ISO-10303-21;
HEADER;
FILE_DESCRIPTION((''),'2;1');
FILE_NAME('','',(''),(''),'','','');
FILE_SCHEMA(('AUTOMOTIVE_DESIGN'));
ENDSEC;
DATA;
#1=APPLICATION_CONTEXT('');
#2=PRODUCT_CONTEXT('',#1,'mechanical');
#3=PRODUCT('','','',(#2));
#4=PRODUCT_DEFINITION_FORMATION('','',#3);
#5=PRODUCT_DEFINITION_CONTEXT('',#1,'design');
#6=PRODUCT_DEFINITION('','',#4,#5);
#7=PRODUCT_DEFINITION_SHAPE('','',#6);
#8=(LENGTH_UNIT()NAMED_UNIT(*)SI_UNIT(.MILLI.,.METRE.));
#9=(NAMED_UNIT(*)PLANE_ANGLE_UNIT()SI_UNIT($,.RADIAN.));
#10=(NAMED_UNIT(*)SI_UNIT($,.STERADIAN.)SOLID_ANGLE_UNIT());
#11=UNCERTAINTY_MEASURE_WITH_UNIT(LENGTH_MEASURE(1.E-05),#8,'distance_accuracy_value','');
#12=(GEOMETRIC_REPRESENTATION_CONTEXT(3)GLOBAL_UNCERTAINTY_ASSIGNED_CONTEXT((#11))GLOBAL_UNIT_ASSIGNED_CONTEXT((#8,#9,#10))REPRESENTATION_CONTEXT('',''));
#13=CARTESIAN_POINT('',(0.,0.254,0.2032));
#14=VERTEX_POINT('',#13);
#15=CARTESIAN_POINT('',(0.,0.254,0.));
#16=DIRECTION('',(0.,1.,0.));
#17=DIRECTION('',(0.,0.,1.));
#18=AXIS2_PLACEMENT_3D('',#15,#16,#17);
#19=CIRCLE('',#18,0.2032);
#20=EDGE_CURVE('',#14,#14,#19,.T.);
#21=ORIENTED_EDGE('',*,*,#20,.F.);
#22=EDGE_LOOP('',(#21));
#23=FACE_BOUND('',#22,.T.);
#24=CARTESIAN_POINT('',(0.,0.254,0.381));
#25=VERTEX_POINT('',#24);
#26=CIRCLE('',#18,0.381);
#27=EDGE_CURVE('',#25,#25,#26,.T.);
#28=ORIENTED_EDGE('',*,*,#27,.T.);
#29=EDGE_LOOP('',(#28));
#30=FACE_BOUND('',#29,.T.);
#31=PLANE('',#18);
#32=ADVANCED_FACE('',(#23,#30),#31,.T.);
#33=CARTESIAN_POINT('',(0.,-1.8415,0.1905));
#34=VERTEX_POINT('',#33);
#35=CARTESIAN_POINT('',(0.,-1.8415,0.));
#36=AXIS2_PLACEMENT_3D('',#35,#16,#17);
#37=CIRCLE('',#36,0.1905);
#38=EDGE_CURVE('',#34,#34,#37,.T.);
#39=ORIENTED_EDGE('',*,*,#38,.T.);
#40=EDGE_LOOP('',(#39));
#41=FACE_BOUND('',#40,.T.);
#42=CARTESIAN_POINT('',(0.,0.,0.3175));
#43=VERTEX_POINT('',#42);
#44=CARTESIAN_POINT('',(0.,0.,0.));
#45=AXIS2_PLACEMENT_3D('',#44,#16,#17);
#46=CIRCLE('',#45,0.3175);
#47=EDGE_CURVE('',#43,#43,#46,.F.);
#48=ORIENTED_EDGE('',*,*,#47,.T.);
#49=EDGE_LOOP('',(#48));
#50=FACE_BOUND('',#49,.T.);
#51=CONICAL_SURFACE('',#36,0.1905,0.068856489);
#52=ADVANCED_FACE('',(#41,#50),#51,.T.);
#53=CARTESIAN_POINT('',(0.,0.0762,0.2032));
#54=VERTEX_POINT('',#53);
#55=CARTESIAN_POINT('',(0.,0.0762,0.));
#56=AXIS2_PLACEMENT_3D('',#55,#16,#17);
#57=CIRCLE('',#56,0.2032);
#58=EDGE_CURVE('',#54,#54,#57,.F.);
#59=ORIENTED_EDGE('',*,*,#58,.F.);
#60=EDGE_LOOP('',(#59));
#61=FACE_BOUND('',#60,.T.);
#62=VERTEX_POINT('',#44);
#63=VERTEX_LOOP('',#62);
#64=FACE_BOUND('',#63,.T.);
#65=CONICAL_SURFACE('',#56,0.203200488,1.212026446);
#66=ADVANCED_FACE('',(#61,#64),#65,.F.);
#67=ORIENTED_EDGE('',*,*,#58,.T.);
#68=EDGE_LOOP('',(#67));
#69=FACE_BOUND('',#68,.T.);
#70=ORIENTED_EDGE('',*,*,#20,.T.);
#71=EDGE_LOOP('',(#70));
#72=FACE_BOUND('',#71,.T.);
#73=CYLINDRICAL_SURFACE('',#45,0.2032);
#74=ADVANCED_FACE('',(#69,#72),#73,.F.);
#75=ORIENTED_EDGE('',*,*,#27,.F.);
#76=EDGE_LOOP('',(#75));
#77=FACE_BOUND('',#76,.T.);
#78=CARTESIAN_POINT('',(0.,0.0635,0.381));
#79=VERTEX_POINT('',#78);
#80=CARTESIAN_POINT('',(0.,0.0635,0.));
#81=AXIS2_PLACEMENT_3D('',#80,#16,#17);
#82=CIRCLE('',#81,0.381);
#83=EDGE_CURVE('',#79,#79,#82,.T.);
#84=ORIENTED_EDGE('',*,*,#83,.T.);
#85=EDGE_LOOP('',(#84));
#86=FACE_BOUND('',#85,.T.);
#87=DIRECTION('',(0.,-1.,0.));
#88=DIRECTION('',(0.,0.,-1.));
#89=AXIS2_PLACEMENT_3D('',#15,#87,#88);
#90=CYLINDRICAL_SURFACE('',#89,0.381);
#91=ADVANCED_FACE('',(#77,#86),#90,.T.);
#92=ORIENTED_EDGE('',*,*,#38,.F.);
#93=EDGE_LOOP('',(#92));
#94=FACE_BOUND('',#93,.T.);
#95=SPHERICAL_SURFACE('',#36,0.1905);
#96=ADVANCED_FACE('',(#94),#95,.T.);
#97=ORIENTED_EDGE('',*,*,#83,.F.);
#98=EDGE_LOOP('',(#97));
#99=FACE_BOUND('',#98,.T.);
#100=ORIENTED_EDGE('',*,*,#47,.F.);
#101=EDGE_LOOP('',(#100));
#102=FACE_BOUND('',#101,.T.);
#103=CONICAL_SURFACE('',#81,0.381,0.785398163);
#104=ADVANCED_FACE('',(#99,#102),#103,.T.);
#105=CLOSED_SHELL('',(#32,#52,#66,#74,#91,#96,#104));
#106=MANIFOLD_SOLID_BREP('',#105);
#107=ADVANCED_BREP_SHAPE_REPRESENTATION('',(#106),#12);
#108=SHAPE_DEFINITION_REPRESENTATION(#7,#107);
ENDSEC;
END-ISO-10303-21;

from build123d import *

# Parameters (mm, degrees)
SKETCH1_R           = 0.381
BOSS_EXTRUDE1_DEPTH = 0.254
CHAMFER1_SIZE       = 0.0635
SKETCH5_R           = 0.2032
CUT_EXTRUDE1_DEPTH  = 0.254
CHAMFER2_SIZE       = 0.0762


with BuildPart() as part:
    # Sketch1 → Boss-Extrude1 (new body)
    with BuildSketch(Plane(origin=(0, 0, 0), x_dir=(1, 0, 0), z_dir=(0, 1, 0))):
        with Locations(Location((0, 0, 0), (0, 0, 270))):
            Circle(SKETCH1_R)
    extrude(amount=BOSS_EXTRUDE1_DEPTH)

    # Chamfer1
    chamfer1_edges = [part.edges().sort_by_distance(p)[0] for p in [
        (0, 0, -0.381),
    ]]
    chamfer(chamfer1_edges, length=CHAMFER1_SIZE)

    # Sketch4 → Revolve1 (revolve)
    with BuildSketch(Plane.ZY):
        with BuildLine():
            Line((0, 0), (0, -2.032))
            ThreePointArc((0, -2.032), (0.134703842, -1.976203842), (0.1905, -1.8415))
            Line((0.1905, -1.8415), (0.3175, 0))
            Line((0.3175, 0), (0, 0))
        make_face()
    revolve(axis=Axis((0, 0.254, 0), (0, -1, 0)))

    # Sketch5 → Cut-Extrude1 (cut)
    with BuildSketch(Plane(origin=(0, 0.254, 0), x_dir=(1, 0, 0), z_dir=(0, 1, 0))):
        with Locations(Location((0, 0, 0), (0, 0, 270))):
            Circle(SKETCH5_R)
    extrude(amount=-CUT_EXTRUDE1_DEPTH, mode=Mode.SUBTRACT)

    # Chamfer2
    # the kernel refuses this chamfer: 0.203200488, 0.0762 mm, written as the material it adds along each edge
    with BuildSketch(Plane(origin=(0, 0, 0), x_dir=(0, 0, 1), z_dir=(-1, 0, 0))) as chamfer2_piece_1:
        Polygon((0.2032, CHAMFER2_SIZE), (0, 1.83e-07), (0, 0), (0.2032, 0), align=None)
    revolve(axis=Axis((0, 0, 0), (0, 1, 0)))


solid = part.part
